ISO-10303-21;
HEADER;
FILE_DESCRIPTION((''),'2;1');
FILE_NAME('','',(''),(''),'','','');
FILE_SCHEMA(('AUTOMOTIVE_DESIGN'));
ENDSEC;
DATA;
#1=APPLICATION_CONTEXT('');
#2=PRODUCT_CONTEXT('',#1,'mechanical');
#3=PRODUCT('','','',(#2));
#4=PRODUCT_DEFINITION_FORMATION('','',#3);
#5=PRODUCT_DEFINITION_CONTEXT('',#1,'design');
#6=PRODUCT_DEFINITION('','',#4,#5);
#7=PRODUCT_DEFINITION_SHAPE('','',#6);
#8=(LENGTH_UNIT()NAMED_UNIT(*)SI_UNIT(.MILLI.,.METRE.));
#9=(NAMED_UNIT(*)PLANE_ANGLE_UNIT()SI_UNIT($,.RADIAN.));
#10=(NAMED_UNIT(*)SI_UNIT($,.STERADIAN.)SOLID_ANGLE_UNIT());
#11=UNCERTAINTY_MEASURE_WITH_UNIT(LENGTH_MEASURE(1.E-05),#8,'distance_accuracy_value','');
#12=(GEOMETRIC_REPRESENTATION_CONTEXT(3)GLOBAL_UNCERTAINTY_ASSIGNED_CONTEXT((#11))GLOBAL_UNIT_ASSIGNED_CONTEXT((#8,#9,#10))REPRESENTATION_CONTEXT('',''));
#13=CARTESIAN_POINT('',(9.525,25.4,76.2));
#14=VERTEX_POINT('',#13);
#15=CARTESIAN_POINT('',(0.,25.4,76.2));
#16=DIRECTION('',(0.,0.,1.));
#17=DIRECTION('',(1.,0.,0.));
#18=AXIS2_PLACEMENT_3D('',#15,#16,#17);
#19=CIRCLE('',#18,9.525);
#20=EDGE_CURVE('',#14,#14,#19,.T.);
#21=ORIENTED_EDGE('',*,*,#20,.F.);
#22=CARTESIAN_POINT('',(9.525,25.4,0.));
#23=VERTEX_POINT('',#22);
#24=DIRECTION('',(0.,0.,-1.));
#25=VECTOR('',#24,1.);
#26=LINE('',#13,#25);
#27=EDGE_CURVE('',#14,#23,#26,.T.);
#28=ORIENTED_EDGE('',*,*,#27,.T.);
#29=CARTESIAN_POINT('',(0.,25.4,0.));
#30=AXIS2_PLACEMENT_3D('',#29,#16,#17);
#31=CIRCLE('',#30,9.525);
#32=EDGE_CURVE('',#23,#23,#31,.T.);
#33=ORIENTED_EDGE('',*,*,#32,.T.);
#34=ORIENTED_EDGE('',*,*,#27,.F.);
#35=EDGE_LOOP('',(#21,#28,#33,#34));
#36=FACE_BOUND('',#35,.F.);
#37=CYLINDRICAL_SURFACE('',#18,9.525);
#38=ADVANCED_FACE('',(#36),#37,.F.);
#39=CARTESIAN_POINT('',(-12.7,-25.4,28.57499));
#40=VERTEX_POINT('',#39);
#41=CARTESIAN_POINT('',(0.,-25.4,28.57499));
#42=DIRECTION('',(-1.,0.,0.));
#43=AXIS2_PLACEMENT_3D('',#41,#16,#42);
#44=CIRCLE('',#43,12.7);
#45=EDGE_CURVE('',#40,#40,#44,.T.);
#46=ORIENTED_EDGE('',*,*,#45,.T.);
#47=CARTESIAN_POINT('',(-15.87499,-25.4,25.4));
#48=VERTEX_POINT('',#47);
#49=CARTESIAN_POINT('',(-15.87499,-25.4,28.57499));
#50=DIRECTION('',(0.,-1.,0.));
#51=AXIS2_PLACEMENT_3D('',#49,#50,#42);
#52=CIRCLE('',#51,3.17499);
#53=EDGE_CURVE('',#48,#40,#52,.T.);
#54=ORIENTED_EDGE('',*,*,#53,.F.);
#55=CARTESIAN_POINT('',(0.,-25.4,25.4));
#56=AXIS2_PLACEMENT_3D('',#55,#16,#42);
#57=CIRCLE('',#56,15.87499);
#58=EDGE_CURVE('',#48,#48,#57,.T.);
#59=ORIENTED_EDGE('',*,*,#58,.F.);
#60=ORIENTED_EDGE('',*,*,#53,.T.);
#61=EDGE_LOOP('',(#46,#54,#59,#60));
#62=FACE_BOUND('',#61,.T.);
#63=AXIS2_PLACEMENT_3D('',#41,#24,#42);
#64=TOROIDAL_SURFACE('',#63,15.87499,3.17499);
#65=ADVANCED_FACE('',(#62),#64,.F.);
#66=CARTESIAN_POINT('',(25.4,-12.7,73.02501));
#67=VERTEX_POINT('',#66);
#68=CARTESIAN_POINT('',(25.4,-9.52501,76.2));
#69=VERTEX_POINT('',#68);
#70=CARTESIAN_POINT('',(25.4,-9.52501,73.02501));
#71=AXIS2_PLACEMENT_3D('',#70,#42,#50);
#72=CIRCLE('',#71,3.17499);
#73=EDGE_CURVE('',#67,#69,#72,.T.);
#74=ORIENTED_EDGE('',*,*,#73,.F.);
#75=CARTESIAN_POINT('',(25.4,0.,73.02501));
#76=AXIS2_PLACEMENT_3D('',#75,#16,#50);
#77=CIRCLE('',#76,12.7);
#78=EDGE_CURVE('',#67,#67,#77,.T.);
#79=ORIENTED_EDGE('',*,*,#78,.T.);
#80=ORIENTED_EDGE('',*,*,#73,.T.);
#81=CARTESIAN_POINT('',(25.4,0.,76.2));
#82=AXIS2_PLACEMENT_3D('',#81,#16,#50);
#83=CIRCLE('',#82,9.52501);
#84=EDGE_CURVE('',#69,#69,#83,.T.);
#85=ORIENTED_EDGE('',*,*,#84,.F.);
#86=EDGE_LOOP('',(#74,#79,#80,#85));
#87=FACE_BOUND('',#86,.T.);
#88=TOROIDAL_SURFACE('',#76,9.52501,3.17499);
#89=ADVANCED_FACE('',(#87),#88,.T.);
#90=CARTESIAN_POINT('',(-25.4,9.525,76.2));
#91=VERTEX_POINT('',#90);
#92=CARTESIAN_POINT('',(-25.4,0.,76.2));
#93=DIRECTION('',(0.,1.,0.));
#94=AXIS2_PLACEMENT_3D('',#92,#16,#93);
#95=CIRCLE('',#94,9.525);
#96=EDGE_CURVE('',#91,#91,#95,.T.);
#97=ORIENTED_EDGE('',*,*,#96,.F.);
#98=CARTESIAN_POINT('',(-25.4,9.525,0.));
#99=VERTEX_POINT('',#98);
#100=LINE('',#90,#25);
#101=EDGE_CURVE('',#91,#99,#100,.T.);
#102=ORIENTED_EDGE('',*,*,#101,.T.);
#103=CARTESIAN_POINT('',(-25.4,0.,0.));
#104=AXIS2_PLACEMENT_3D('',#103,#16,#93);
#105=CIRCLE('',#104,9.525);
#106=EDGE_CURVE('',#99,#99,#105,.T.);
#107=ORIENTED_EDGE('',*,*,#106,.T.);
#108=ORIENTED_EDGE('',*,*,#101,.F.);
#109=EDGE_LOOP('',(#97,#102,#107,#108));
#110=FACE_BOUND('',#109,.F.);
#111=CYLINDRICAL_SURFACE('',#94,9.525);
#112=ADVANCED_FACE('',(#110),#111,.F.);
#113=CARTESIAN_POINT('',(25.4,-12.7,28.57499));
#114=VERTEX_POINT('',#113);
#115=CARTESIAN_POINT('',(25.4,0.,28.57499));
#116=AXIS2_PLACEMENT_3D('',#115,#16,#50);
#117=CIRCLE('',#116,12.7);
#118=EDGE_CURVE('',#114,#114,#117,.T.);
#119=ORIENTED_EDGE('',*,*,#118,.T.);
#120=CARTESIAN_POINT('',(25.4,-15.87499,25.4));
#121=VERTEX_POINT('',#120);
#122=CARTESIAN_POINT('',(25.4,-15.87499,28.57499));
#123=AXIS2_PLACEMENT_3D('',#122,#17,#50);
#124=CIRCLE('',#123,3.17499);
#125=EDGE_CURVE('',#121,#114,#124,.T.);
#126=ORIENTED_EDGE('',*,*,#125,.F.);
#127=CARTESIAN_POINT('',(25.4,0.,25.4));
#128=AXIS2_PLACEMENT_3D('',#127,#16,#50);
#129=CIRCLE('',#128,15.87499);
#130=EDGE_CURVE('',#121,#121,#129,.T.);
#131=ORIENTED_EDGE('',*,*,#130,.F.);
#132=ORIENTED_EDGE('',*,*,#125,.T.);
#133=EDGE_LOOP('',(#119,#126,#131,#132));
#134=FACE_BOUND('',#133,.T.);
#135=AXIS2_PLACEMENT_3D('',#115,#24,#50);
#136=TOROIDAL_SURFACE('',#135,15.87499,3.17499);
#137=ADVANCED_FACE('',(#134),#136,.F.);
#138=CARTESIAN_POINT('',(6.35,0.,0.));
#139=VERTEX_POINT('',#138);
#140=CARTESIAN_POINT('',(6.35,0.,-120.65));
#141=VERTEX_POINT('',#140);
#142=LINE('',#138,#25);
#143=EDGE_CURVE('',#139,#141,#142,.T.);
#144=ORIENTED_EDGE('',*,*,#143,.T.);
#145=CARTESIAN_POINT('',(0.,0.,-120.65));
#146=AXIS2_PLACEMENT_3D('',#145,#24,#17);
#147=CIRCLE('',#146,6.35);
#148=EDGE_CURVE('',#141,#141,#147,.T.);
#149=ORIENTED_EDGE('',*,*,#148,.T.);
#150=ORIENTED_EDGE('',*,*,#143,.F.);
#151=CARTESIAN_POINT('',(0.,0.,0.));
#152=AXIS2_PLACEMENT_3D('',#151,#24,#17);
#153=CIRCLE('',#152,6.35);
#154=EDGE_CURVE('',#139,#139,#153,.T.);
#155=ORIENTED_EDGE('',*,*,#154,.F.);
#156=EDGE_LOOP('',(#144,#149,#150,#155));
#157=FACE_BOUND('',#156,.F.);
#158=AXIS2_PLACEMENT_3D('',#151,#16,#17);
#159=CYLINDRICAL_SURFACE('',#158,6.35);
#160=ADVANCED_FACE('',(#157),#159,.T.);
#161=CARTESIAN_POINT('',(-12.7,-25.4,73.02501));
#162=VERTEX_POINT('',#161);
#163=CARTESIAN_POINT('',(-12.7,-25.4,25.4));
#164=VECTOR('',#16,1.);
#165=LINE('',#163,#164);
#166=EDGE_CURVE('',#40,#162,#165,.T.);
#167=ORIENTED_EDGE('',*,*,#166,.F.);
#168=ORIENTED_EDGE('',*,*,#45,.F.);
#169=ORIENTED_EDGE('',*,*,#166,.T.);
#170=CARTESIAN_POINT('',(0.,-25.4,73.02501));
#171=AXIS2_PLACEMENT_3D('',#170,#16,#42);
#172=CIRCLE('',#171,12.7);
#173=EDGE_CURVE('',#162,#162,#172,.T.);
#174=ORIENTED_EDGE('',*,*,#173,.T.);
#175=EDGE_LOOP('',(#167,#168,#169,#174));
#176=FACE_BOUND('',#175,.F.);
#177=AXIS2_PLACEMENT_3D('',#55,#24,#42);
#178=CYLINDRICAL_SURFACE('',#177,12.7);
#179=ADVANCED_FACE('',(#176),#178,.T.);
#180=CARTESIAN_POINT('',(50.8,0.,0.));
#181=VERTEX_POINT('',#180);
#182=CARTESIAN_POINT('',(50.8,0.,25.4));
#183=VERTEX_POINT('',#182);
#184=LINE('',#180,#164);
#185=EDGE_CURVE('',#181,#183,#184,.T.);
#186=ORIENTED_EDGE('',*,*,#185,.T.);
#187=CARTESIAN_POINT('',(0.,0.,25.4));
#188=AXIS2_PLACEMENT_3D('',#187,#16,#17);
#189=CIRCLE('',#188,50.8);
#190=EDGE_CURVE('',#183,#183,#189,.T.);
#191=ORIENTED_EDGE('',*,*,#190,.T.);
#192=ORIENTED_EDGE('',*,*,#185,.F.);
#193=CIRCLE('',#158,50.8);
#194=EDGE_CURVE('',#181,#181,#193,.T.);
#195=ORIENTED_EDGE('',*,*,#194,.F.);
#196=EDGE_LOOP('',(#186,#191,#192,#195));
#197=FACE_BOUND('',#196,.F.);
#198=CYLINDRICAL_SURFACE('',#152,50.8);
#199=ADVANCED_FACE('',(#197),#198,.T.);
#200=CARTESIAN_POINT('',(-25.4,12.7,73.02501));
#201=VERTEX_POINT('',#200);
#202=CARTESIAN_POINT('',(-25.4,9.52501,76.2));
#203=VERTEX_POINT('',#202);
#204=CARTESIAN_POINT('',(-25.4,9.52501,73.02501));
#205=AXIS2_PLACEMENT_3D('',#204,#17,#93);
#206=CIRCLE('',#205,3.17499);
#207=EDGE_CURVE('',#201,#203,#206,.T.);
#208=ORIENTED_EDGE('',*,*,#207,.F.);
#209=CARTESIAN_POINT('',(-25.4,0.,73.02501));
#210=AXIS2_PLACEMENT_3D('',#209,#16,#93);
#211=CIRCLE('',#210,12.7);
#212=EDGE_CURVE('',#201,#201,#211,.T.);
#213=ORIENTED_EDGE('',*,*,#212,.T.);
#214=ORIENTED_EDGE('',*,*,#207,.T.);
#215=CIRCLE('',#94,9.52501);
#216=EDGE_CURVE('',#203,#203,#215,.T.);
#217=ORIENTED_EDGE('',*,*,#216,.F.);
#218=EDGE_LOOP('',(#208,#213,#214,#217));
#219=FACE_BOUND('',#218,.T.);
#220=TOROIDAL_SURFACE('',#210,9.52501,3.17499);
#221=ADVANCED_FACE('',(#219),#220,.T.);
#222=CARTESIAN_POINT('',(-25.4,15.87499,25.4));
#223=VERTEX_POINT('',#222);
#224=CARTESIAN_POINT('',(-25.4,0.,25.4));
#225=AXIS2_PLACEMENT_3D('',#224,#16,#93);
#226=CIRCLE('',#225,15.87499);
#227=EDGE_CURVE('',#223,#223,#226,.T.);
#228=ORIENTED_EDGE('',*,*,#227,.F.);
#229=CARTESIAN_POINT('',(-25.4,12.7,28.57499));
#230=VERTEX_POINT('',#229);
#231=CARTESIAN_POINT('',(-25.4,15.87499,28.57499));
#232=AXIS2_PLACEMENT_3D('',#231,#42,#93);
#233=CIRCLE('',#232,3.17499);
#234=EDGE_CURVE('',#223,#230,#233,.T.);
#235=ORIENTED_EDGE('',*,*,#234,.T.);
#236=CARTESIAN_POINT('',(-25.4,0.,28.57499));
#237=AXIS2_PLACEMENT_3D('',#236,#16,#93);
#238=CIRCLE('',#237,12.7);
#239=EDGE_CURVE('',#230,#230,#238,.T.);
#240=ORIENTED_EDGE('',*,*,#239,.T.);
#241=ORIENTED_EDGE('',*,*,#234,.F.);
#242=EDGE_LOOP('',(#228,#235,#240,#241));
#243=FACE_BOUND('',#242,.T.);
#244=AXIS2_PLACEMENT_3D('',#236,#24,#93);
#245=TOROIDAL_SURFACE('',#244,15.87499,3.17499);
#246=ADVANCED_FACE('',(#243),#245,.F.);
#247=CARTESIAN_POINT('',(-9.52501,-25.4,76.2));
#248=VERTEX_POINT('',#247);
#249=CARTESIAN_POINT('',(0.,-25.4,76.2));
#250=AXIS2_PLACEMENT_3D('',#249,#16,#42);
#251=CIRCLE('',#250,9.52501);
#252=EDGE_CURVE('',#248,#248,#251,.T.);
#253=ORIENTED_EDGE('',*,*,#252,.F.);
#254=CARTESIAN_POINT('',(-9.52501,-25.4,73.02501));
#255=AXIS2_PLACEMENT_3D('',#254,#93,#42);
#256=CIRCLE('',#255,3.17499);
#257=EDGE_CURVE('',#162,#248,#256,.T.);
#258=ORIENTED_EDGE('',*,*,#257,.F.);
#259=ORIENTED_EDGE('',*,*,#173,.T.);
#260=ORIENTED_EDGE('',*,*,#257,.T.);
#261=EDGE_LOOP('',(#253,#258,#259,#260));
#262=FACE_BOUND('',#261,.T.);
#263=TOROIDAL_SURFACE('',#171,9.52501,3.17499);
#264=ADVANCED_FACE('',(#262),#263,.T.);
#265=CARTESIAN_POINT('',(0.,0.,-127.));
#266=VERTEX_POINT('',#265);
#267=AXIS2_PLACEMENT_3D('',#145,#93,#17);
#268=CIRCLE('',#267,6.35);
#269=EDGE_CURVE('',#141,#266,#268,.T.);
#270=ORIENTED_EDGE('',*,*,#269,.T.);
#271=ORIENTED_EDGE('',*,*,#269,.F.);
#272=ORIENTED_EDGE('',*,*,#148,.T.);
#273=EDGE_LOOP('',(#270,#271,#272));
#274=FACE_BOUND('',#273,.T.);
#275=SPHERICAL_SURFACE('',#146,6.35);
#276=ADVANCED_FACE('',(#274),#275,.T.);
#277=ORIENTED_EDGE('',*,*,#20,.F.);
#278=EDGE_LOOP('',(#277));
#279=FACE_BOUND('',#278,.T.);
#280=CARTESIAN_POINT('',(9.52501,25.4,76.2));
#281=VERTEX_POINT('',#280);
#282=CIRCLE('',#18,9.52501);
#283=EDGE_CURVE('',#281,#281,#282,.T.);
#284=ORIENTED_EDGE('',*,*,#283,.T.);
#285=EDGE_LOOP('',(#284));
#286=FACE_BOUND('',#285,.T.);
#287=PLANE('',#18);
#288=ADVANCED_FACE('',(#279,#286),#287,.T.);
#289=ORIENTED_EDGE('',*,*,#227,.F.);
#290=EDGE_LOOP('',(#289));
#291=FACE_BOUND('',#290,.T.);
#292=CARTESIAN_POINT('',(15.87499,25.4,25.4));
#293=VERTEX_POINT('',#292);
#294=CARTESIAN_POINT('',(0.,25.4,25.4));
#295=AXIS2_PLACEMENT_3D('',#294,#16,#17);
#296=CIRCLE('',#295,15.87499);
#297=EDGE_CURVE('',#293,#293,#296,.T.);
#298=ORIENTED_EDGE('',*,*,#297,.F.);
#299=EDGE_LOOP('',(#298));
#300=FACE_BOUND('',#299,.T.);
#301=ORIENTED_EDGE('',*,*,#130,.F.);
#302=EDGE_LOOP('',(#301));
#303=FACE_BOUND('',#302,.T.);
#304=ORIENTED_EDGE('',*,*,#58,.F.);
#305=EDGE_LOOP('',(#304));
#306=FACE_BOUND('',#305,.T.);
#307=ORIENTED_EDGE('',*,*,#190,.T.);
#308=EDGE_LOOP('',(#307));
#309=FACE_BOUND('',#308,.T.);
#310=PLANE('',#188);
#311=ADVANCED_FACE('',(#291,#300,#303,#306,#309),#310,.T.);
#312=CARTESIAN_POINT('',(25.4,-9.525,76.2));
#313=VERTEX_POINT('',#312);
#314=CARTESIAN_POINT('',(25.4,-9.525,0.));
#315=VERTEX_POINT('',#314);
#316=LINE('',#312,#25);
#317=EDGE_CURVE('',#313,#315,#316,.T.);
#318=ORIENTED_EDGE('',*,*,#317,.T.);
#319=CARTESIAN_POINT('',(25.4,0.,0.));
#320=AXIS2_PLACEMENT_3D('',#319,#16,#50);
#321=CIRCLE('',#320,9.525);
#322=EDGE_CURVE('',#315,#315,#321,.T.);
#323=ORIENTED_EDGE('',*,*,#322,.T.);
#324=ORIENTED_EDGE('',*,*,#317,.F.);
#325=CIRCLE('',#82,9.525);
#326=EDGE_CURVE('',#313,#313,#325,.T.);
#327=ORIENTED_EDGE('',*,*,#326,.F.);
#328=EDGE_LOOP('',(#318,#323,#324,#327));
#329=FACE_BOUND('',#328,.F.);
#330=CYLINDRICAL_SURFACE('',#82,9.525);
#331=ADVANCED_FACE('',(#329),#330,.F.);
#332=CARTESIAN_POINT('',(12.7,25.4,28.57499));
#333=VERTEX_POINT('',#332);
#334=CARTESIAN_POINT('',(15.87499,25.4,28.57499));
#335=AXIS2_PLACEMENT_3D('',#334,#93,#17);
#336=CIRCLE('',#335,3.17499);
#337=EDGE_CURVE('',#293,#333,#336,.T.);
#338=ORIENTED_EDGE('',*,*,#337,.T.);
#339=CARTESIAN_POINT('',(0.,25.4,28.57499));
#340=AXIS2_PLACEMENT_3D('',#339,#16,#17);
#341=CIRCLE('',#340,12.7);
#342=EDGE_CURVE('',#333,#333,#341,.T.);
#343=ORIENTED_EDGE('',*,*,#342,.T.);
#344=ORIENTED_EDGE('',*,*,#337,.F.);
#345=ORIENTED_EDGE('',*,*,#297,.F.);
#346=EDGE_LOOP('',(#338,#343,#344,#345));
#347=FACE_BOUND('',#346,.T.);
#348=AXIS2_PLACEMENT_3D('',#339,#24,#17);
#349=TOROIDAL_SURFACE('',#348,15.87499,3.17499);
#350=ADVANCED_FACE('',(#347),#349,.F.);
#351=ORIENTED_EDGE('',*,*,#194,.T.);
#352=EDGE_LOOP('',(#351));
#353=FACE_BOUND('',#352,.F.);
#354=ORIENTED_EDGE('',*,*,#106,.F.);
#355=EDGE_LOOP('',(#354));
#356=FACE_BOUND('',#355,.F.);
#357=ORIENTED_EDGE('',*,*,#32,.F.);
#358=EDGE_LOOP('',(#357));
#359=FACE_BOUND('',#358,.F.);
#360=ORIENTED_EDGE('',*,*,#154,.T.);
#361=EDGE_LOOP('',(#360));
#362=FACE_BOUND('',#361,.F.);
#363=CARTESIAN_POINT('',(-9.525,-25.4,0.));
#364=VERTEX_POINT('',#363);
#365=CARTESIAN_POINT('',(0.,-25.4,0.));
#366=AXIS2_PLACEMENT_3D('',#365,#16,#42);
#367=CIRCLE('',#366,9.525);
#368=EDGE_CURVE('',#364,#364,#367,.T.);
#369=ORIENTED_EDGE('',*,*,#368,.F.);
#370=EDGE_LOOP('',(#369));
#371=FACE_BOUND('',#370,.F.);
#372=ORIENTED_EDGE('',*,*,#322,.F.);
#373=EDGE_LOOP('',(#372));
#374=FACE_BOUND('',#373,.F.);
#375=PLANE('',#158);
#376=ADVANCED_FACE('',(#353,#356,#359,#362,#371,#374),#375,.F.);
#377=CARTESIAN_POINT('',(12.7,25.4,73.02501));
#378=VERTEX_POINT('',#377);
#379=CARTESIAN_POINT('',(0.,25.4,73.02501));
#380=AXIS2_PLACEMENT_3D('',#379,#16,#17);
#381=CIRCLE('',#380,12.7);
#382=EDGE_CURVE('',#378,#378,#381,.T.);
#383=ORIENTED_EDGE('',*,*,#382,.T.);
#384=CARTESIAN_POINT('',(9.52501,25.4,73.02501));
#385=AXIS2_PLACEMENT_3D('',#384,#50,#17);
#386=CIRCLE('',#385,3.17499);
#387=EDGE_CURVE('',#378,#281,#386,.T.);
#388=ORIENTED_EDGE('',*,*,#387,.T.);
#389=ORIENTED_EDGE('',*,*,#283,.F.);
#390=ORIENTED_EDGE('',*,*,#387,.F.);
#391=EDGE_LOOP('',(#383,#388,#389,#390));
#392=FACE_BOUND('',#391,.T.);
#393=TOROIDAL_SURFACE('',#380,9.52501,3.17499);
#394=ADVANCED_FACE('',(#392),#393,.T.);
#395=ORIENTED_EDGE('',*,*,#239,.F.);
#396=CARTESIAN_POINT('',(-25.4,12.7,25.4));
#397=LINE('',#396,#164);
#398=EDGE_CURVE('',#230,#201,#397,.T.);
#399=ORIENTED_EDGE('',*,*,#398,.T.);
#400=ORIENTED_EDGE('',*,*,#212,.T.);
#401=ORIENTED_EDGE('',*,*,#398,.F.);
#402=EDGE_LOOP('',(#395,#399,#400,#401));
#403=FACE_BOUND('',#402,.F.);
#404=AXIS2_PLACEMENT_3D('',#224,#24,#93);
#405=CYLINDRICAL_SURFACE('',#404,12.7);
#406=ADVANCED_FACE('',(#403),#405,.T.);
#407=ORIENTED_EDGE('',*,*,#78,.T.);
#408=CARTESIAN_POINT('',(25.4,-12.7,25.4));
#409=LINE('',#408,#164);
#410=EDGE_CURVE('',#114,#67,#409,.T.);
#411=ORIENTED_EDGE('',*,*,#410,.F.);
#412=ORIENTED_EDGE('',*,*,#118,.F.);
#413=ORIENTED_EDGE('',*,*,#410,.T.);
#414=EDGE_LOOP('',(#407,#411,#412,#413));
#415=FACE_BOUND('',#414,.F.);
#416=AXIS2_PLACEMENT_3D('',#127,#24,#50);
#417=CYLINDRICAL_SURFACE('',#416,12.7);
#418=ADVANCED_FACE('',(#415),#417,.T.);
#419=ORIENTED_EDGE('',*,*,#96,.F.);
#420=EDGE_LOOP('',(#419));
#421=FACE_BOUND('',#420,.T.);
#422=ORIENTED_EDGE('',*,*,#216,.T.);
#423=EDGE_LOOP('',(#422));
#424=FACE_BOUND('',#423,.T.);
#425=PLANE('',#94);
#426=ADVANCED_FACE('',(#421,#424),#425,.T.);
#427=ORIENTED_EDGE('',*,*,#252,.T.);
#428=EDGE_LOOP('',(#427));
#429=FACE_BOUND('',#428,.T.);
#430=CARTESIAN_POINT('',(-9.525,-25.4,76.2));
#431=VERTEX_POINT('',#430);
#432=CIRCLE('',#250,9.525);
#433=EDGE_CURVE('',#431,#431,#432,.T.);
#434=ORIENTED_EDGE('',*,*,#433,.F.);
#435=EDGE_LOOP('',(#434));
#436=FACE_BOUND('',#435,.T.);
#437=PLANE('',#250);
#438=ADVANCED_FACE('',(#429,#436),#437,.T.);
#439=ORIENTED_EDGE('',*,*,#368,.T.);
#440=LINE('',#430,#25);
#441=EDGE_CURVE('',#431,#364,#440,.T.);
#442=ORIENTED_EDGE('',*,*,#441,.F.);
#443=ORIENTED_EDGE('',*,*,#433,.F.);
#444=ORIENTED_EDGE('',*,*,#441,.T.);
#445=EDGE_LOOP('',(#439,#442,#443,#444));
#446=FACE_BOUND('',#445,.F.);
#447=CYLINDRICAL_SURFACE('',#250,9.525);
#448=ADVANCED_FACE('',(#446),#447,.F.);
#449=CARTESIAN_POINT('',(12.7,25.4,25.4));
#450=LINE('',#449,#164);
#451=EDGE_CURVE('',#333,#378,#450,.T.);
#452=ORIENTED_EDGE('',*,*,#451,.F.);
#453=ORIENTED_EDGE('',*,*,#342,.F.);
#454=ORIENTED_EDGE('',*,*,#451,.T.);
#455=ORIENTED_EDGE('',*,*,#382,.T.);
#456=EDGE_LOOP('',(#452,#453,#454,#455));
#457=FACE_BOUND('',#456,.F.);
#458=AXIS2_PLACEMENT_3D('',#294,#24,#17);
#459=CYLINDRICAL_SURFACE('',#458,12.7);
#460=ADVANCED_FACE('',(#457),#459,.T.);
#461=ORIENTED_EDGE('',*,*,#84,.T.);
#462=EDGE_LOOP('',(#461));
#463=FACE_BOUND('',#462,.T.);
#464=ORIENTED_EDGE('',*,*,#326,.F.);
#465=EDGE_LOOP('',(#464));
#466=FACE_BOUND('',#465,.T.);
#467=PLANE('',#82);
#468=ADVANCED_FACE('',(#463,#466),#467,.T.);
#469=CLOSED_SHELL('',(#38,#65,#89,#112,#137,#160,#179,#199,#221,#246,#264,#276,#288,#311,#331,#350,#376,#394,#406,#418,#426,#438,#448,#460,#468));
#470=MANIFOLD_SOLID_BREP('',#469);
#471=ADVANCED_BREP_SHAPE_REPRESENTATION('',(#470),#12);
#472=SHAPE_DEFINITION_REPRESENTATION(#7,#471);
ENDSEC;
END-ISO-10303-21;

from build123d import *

# Parameters (mm, degrees)
F0_R            = 50.8
F1_DEPTH        = 25.4
F2_R            = 12.7
F3_DEPTH        = 50.8
F3_COPIES_COUNT = 4
F4_R            = 9.525
F5_DEPTH        = 76.201
F5_COPIES_COUNT = 4
F6_R            = 3.17499
F7_R            = 6.35
F8_DEPTH        = 127
F9_R            = 6.35


# Not quite as in the source:
# - a fillet or chamfer is up to 0.001 mm smaller than in the source, because OpenCascade refuses the exact size
# - a pattern or mirror of a feature is missing from the dataset's text; its kind, count and spacing are read off the source's solid


with BuildPart() as f1:
    # F0 (on Top) → F1 (new body)
    with BuildSketch(Plane.XY):
        Circle(F0_R)
    extrude(amount=F1_DEPTH)

    # F2 (on face) → F3 (join)
    with BuildSketch(Plane.XY.offset(25.4)):
        with Locations((0, 25.4)):
            Circle(F2_R)
    f3 = extrude(amount=F3_DEPTH)

    # F3_copies: F3 ×4 about axis
    f3_copies_axis = Axis((0, 0, 0), (0, 0, 1))
    for i in range(1, F3_COPIES_COUNT):
        add(f3.rotate(f3_copies_axis, i * 360 / F3_COPIES_COUNT))

    # F4 (on face) → F5 (cut, through all)
    with BuildSketch(Plane.XY.offset(76.2)):
        with Locations((0, 25.4)):
            Circle(F4_R)
    f5 = extrude(amount=-F5_DEPTH, mode=Mode.SUBTRACT)

    # F5_copies: F5 ×4 about axis
    f5_copies_axis = Axis((0, 0, 0), (0, 0, 1))
    for i in range(1, F5_COPIES_COUNT):
        add(f5.rotate(f5_copies_axis, i * 360 / F5_COPIES_COUNT), mode=Mode.SUBTRACT)

    # F6 (radius 3.175 in the source; OpenCascade refuses exactly that, so slightly less here)
    f6_edges = [f1.edges().sort_by_distance(p)[0] for p in [
        (-12.7, 25.4, 76.2),
        (-12.7, 25.4, 25.4),
        (12.7, -25.4, 25.4),
        (-25.4, -12.7, 25.4),
        (25.4, 12.7, 25.4),
        (12.7, -25.4, 76.2),
        (-25.4, -12.7, 76.2),
        (25.4, 12.7, 76.2),
    ]]
    fillet(f6_edges, radius=F6_R)

    # F7 (on face) → F8 (join)
    with BuildSketch(Plane(origin=(0, 0, 0), x_dir=(1, 0, 0), z_dir=(0, 0, -1))):
        Circle(F7_R)
    extrude(amount=F8_DEPTH)

    # F9
    f9_edges = [f1.edges().sort_by_distance(p)[0] for p in [
        (-6.35, 0, -127),
    ]]
    fillet(f9_edges, radius=F9_R)


solid = f1.part
